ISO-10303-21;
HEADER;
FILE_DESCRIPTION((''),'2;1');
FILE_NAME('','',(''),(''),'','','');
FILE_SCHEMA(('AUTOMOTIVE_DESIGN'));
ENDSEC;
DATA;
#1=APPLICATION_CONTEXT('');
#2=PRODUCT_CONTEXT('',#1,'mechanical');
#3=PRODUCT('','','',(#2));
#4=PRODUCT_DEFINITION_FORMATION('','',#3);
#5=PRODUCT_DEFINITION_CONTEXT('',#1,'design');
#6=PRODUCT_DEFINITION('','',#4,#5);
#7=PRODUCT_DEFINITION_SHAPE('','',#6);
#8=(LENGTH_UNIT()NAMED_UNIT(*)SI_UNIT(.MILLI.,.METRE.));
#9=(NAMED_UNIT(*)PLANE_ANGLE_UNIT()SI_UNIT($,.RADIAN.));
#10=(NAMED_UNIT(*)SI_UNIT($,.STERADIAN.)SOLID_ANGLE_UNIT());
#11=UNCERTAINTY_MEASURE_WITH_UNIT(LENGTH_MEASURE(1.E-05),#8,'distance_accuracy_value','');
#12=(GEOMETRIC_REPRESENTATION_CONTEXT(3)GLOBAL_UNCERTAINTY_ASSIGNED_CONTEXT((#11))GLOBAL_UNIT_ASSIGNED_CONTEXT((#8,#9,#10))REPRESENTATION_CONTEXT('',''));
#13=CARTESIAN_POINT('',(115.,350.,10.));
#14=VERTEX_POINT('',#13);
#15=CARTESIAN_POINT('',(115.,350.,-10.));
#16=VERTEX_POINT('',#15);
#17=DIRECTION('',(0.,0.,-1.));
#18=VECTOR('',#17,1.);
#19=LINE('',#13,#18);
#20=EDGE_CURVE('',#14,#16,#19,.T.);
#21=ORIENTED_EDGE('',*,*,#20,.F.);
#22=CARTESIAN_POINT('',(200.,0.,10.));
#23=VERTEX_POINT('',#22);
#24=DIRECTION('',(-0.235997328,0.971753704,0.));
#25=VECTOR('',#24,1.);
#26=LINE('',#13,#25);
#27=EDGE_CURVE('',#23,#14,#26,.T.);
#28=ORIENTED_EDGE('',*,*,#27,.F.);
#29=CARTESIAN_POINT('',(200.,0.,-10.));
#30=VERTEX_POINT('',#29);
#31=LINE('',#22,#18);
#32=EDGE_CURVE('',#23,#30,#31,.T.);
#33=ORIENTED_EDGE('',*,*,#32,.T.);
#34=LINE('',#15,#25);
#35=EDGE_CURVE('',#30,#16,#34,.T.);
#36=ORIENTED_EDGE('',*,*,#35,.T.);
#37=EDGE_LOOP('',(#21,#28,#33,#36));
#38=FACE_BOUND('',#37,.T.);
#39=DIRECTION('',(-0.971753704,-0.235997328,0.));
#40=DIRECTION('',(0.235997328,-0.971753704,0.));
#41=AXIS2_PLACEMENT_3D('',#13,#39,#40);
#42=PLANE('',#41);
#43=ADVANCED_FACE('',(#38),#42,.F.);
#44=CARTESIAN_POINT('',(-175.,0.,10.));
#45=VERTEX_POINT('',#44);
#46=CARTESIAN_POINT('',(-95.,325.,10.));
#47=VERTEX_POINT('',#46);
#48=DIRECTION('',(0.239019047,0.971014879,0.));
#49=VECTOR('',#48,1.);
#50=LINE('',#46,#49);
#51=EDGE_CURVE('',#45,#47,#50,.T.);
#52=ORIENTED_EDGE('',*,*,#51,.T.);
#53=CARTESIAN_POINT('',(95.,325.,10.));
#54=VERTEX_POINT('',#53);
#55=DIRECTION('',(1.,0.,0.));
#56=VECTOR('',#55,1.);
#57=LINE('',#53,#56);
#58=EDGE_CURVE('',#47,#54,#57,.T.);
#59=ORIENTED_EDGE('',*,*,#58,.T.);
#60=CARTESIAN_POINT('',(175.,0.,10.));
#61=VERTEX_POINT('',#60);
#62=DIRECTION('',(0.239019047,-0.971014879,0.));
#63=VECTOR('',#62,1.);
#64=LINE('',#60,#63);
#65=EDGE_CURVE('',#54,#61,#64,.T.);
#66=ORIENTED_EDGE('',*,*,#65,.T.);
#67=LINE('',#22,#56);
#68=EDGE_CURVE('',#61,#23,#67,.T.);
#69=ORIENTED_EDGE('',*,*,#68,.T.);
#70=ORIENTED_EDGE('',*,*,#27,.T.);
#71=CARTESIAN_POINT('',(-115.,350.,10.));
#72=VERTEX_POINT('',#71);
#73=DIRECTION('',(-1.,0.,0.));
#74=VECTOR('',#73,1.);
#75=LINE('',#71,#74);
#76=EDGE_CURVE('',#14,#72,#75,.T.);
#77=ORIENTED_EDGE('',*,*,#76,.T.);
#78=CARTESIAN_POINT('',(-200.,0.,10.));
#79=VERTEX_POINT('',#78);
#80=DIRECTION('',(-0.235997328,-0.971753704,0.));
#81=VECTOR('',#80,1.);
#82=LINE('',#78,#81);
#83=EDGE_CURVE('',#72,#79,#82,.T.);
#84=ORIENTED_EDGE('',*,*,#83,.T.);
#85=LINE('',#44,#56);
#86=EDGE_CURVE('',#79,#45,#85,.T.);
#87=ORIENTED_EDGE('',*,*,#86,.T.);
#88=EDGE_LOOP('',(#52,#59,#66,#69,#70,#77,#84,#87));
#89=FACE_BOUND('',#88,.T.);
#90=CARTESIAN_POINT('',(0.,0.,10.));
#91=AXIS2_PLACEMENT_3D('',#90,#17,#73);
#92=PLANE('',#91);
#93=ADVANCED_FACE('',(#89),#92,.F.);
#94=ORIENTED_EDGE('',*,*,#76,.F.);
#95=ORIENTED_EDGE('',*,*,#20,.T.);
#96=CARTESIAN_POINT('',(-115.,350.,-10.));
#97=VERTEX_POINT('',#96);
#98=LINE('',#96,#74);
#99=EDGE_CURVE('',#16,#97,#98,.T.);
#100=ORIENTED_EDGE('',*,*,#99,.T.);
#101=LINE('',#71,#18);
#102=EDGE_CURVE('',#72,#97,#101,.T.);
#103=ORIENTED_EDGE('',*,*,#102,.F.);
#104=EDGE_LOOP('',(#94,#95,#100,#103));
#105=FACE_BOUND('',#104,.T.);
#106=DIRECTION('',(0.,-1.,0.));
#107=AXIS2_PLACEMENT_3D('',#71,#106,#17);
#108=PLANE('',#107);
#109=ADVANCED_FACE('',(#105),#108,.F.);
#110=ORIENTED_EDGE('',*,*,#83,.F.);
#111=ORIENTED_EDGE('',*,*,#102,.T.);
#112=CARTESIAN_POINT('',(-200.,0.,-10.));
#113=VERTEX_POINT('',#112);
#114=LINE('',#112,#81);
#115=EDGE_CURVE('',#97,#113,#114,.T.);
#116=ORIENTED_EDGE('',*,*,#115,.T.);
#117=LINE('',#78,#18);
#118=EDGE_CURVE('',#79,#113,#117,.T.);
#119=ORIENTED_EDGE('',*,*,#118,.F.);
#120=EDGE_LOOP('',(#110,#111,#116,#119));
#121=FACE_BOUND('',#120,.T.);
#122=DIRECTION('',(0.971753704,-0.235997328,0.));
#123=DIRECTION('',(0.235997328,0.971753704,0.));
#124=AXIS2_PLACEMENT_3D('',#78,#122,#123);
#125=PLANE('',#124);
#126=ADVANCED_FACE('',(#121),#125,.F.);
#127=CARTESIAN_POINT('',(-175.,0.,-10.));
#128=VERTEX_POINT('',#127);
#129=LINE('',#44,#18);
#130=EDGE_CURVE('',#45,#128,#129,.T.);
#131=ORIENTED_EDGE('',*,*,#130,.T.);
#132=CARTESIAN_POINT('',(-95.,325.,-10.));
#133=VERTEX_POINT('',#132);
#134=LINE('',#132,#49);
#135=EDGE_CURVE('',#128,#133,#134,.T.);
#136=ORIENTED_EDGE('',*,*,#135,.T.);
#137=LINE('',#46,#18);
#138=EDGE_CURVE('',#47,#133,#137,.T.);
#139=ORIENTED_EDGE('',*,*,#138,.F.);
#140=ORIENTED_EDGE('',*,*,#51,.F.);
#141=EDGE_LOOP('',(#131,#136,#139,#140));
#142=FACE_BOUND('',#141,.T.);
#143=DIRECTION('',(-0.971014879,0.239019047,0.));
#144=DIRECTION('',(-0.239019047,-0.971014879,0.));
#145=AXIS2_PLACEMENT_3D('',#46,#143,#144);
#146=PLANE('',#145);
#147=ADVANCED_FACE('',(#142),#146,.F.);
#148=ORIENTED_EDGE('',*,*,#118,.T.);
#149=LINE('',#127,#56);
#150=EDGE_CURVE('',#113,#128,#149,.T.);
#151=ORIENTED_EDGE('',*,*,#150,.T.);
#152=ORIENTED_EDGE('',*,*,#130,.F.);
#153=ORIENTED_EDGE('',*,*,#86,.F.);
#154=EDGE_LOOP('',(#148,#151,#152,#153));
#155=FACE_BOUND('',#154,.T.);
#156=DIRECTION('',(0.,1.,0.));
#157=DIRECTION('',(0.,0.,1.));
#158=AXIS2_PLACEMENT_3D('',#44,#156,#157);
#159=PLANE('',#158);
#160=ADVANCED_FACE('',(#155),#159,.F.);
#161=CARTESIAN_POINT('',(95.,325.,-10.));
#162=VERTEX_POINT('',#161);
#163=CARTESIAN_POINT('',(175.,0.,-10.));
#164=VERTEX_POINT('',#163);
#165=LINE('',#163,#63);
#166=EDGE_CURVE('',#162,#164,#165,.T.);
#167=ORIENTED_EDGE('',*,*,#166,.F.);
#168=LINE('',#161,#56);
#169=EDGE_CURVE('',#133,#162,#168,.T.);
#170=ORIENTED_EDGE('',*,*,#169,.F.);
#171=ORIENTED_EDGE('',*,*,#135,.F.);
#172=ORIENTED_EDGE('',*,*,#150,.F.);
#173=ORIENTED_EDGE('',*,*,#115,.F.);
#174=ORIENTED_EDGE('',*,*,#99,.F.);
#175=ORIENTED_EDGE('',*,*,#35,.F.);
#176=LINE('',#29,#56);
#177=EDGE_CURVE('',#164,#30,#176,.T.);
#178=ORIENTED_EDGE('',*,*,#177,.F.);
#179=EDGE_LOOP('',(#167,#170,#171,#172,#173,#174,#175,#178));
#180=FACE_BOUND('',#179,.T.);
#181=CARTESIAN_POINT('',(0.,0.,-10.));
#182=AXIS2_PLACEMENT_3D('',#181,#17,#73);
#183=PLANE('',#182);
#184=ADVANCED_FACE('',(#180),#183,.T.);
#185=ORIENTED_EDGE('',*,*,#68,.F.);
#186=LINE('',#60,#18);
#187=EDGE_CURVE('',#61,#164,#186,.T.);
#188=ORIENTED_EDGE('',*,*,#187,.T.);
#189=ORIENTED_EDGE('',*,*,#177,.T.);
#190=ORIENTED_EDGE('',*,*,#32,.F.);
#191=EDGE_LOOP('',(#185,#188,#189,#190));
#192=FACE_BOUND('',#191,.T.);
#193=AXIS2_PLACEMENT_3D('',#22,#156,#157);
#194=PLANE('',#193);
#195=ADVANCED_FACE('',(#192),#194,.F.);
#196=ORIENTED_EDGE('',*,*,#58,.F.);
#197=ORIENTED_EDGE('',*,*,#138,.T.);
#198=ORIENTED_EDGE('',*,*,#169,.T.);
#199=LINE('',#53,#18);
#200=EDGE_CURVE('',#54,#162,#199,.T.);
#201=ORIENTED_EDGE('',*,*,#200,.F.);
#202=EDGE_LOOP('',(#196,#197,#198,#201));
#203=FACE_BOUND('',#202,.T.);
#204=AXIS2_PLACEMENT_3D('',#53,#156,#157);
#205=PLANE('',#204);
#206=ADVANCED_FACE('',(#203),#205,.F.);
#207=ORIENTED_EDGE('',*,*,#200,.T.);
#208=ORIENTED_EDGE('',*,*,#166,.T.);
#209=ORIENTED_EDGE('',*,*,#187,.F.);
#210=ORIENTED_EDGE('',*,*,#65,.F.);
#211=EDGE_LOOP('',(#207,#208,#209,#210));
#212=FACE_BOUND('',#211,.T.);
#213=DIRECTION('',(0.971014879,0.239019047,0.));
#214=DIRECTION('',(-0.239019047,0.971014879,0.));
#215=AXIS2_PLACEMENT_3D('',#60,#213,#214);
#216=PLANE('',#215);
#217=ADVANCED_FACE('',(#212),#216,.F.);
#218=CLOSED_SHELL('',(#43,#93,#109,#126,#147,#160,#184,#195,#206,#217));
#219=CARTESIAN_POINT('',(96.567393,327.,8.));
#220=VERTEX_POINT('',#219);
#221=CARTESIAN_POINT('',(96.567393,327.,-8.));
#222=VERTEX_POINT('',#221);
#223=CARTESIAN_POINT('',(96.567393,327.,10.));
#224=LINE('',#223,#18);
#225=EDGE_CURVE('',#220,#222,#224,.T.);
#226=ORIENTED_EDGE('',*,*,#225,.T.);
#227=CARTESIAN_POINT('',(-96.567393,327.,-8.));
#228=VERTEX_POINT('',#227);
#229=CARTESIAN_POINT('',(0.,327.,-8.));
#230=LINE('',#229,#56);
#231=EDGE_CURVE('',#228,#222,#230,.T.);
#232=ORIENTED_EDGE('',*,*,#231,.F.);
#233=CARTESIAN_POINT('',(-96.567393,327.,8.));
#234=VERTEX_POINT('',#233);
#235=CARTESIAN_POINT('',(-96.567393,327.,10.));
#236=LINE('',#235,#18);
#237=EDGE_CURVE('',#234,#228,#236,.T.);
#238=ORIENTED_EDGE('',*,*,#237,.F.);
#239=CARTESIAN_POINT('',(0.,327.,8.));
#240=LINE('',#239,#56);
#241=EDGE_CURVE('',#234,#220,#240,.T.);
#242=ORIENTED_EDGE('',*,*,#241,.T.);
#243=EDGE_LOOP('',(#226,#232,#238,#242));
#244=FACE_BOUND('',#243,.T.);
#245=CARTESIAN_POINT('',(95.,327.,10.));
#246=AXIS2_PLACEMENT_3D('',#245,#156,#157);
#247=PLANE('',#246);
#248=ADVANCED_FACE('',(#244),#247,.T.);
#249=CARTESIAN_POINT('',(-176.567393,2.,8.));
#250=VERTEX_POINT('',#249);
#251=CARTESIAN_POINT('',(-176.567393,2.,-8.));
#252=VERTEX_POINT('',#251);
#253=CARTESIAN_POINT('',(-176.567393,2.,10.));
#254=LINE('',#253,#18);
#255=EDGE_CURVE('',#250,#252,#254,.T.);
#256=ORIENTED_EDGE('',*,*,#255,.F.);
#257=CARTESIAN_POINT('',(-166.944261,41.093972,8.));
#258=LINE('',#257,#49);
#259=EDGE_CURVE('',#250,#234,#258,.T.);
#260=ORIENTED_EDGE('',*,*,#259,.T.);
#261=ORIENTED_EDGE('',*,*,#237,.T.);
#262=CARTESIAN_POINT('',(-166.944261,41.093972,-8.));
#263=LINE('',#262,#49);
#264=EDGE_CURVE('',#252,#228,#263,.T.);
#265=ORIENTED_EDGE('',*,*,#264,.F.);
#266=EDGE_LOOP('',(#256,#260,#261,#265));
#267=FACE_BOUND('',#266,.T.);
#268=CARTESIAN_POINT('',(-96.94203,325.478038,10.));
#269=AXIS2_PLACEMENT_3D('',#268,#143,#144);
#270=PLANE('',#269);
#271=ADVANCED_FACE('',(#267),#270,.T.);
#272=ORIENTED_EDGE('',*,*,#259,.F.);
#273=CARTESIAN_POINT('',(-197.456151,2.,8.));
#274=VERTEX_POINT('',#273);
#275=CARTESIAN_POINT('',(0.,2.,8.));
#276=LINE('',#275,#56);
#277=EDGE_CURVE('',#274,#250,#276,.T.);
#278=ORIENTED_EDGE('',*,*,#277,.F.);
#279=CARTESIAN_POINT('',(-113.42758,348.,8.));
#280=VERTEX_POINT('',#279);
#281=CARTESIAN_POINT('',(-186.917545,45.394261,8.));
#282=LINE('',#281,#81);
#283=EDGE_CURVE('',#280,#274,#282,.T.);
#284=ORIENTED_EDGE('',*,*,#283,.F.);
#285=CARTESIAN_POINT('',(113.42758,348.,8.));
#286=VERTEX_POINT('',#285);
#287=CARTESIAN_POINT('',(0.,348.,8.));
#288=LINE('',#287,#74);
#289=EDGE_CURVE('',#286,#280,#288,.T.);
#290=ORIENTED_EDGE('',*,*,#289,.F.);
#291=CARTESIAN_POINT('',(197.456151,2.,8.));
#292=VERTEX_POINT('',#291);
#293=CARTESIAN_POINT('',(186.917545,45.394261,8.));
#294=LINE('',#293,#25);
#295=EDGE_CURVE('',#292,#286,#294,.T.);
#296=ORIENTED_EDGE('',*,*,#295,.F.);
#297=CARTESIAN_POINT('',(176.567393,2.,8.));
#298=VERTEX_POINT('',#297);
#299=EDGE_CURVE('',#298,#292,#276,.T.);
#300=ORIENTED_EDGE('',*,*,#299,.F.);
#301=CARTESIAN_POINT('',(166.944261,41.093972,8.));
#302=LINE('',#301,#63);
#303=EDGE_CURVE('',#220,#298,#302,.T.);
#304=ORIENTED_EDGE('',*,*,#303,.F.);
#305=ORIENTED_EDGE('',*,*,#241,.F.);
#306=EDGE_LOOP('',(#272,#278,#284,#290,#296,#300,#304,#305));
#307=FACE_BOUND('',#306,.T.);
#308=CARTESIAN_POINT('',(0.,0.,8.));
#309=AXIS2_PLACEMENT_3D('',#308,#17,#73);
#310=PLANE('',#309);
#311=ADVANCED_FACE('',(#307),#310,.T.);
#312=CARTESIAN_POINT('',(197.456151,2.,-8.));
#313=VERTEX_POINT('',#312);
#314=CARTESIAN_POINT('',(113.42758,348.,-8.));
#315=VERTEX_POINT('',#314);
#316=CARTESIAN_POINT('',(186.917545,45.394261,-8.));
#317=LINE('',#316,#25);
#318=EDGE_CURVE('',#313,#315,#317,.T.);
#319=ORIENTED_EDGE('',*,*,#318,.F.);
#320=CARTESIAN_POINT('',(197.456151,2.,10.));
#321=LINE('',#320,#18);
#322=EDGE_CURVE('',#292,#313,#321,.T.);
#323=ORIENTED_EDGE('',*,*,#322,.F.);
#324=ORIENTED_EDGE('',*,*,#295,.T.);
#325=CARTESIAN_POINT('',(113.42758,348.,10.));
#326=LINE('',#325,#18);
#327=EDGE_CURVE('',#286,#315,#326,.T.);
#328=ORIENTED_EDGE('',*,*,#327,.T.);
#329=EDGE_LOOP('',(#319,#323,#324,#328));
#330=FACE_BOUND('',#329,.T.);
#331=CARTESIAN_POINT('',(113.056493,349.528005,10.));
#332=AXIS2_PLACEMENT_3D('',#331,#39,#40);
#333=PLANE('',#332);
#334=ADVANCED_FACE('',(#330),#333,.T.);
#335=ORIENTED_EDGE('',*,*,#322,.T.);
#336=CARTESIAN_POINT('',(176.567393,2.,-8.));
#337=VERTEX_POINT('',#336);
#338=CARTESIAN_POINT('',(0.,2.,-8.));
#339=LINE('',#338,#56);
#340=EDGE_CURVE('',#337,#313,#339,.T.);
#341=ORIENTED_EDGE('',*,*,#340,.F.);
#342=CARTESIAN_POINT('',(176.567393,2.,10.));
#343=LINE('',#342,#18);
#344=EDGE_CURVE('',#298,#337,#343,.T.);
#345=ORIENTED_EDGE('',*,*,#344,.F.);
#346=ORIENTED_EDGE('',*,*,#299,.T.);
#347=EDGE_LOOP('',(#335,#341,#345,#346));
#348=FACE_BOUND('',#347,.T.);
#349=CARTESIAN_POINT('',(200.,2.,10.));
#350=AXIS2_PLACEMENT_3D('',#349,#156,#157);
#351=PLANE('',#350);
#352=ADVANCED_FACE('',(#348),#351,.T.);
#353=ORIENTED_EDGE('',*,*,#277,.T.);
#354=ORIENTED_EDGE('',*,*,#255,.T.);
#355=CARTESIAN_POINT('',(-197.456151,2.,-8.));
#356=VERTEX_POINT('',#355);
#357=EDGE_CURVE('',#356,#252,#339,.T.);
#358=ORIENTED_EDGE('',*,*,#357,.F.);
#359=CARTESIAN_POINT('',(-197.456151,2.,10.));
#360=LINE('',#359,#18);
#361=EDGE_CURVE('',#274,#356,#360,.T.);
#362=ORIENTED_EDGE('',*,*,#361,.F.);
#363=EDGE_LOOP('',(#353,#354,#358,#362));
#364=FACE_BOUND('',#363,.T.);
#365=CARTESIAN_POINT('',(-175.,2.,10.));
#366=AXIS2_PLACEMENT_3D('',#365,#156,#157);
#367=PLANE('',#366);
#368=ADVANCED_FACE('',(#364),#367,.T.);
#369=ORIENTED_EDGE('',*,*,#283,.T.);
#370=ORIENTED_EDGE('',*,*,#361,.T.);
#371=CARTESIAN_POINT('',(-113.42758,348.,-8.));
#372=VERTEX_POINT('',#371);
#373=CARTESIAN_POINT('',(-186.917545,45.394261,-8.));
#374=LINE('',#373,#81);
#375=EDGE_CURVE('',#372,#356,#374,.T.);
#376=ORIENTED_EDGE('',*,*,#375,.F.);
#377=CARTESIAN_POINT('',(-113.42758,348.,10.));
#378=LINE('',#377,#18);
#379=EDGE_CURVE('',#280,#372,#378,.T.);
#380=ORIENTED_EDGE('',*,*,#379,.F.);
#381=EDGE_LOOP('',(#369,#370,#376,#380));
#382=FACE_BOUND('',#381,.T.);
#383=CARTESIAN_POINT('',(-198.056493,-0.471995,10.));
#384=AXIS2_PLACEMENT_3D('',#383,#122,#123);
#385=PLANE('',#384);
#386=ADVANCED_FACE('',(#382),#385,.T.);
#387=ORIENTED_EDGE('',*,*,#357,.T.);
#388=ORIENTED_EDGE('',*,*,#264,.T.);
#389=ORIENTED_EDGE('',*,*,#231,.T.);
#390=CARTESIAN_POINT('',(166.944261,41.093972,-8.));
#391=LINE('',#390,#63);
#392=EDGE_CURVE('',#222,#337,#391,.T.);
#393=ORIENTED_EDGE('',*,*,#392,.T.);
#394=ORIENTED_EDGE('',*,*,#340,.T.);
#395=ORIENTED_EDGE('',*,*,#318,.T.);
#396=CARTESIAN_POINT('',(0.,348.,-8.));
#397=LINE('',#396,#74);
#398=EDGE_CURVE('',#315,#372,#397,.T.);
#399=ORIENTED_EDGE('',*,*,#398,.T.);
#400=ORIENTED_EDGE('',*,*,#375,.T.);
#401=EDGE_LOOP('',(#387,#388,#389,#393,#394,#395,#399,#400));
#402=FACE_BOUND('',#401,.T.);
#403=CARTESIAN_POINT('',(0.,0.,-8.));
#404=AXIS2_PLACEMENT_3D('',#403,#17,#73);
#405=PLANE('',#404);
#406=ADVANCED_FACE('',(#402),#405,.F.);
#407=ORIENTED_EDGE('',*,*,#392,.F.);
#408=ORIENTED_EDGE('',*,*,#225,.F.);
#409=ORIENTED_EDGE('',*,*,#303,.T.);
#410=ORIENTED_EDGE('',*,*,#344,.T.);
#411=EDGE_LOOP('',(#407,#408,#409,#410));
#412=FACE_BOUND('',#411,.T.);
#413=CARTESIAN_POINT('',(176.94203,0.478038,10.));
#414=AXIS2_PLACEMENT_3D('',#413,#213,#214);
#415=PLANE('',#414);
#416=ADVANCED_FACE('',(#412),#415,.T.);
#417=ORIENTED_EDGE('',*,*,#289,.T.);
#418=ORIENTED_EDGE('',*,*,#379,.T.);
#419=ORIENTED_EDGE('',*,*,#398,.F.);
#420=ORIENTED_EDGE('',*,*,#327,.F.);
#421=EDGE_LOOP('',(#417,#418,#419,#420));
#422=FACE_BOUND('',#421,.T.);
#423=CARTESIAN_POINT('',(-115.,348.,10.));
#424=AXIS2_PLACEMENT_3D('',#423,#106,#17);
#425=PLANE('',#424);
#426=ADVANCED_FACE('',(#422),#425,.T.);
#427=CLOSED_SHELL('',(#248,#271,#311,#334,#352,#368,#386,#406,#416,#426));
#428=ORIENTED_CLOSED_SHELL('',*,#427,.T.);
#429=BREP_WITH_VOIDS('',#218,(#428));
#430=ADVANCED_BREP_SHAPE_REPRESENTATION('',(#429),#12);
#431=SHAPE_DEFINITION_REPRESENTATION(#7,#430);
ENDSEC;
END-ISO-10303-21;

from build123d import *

# Parameters (mm, degrees)
A_FRAME_BLANK_DEPTH   = 10
HOLLOW_WALL_2MM_START = -8
HOLLOW_WALL_2MM_DEPTH = 16


# Read off the part's stored shape, not the designer's step: Hollow_Wall_2mm
with BuildPart() as part:
    # A_Frame_Profile → A_Frame_Blank (new, symmetric)
    with BuildSketch(Plane.XY):
        Polygon((-200, 0), (-115, 350), (115, 350), (200, 0), (175, 0), (95, 325), (-95, 325), (-175, 0), align=None)
    extrude(amount=A_FRAME_BLANK_DEPTH, both=True)

    # Hollow_Wall_2mm outline → Hollow_Wall_2mm (cut)
    with BuildSketch(Plane.XY.offset(HOLLOW_WALL_2MM_START)):
        Polygon((-197.456151033, 2), (-176.567392981, 2), (-96.567392981, 327), (96.567392981, 327), (176.567392981, 2), (197.456151033, 2), (113.427579604, 348), (-113.427579604, 348), align=None)
    extrude(amount=HOLLOW_WALL_2MM_DEPTH, mode=Mode.SUBTRACT)


solid = part.part
